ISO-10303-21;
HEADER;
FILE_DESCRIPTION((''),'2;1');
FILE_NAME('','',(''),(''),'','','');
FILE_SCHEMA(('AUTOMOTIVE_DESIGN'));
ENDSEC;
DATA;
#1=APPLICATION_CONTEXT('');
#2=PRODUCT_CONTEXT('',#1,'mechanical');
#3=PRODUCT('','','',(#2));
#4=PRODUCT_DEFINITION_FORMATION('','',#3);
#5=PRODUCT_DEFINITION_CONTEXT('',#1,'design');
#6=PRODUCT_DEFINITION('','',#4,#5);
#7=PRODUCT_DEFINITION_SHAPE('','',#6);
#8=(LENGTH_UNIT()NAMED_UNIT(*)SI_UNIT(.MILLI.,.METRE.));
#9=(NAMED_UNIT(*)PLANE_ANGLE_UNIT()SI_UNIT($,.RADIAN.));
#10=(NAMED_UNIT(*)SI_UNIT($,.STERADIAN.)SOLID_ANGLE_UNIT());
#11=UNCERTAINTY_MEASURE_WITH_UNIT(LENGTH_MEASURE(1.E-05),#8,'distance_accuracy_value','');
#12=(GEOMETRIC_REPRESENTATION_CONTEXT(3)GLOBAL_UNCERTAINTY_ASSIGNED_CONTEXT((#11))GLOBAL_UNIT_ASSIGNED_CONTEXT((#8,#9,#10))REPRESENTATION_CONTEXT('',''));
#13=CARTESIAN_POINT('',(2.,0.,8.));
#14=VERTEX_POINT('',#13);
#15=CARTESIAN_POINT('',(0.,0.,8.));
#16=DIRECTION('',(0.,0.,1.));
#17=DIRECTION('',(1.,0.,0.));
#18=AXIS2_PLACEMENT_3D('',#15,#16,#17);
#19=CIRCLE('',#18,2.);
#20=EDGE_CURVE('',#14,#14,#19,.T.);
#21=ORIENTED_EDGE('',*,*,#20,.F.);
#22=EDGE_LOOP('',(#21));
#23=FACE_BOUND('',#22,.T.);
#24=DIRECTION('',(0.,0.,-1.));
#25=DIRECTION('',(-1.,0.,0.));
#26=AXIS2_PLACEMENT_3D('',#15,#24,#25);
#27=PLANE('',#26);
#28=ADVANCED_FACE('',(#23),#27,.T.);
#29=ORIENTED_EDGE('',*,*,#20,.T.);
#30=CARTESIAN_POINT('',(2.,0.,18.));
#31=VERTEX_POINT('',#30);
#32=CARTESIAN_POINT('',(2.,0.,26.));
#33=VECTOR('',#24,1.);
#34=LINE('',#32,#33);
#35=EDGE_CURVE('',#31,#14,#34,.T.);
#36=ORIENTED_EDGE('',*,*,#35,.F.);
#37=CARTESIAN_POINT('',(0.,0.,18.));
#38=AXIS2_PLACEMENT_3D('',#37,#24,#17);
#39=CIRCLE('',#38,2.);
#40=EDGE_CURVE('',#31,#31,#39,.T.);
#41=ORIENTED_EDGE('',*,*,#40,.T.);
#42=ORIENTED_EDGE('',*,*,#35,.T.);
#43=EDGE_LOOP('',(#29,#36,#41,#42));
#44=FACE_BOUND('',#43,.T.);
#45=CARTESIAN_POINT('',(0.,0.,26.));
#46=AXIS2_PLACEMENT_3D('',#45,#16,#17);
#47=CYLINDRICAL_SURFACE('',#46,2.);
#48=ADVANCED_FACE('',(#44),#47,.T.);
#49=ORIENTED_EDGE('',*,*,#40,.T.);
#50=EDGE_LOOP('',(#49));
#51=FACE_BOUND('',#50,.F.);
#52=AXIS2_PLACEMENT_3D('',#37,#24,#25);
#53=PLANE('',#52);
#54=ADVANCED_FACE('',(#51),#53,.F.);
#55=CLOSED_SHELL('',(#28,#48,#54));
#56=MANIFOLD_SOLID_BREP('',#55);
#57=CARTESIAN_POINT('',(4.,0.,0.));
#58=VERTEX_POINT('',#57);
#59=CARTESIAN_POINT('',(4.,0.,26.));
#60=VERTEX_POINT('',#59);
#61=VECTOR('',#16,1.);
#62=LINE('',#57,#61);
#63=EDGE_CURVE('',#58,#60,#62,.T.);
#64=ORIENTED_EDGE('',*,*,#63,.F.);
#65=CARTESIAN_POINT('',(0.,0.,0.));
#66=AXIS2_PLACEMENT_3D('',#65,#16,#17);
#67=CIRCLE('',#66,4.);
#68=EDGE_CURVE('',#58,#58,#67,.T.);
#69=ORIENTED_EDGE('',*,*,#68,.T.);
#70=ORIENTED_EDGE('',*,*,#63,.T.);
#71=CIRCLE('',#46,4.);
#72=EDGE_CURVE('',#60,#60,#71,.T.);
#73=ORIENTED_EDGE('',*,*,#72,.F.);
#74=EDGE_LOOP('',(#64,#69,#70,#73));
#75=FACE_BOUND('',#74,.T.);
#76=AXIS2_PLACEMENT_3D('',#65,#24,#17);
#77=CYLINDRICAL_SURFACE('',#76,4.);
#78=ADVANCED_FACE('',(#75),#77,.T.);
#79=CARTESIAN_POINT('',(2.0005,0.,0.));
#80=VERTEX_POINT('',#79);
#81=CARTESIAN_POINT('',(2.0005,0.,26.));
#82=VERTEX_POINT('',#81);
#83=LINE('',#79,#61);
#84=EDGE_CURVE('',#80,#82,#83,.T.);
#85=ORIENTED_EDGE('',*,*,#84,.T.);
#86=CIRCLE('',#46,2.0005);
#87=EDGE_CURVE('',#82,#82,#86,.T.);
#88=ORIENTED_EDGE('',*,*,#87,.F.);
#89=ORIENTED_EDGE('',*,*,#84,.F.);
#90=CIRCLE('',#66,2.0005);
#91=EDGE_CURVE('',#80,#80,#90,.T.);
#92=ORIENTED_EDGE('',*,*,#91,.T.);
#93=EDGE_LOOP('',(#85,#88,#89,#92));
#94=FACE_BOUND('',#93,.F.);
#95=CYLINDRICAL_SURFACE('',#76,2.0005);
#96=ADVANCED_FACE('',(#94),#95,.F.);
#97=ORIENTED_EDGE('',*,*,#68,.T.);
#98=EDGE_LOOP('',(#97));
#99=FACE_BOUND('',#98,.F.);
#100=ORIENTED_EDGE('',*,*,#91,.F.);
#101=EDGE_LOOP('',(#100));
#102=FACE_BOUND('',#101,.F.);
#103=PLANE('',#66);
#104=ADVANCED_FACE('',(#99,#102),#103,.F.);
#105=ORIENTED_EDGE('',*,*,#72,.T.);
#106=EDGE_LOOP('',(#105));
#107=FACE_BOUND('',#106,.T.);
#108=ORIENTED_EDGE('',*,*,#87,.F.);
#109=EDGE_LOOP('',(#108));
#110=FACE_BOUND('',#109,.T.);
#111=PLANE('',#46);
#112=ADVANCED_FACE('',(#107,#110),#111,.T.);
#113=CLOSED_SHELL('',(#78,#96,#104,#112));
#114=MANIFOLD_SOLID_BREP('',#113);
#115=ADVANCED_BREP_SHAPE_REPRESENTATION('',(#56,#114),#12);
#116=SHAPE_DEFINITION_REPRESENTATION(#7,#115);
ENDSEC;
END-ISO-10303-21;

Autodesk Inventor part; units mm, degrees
ref_plane "YZ Plane" through (0, 0, 0) normal (1, 0, 0) x (0, 1, 0)
ref_plane "XZ Plane" through (0, 0, 0) normal (0, 1, 0) x (-1, 0, 0)
sketch "スケッチ1" plane through (0, 0, 0) normal (0, 0, 1) x (1, 0, 0)
  circle A0 centre (0, 0) radius 4
  circle A1 centre (0, 0) radius 2.0005
  dimension "d0" = 8
  dimension "d1" = 4.001
extrude "押し出し1" add sketch "スケッチ1" along normal blind 26
sketch "スケッチ2" plane through (0, 0, 26) normal (0, 0, 1) x (1, 0, 0)
  circle A0 centre (0, 0) radius 2
  dimension "d4" = 4
extrude "押し出し2" add sketch "スケッチ2" against normal blind 25
hole "穴1" at (0, 0, 26) direction (0, 0, -1) diameter 4 depth 8 tip angle 118
hole "穴2" at (0, 0, 0) direction (0, 0, 1) diameter 4 depth 8 tip angle 118
ref_plane "作業平面1" through (0, 0, 8) normal (0, 0, -1) x (-1, 0, 0)
sketch "スケッチ3" plane through (0, 0, 8) normal (0, 0, -1) x (-1, 0, 0)
  circle A0 centre (0, 0) radius 2.0005 projected
  circle A1 centre (0, 0) radius 4 projected
  circle A2 centre (0, 0) radius 2 projected
sketch "スケッチ3 outline for 押し出し3" plane through (0, 0, 8) normal (0, 0, -1) x (-1, 0, 0)
  circle A0 centre (0, 0) radius 2
extrude "押し出し3" add sketch "スケッチ3 outline for 押し出し3" against normal blind 10
properties part number "スペーサーm4-26　簡易筒型" material "アルミニウム 2014-T4"
